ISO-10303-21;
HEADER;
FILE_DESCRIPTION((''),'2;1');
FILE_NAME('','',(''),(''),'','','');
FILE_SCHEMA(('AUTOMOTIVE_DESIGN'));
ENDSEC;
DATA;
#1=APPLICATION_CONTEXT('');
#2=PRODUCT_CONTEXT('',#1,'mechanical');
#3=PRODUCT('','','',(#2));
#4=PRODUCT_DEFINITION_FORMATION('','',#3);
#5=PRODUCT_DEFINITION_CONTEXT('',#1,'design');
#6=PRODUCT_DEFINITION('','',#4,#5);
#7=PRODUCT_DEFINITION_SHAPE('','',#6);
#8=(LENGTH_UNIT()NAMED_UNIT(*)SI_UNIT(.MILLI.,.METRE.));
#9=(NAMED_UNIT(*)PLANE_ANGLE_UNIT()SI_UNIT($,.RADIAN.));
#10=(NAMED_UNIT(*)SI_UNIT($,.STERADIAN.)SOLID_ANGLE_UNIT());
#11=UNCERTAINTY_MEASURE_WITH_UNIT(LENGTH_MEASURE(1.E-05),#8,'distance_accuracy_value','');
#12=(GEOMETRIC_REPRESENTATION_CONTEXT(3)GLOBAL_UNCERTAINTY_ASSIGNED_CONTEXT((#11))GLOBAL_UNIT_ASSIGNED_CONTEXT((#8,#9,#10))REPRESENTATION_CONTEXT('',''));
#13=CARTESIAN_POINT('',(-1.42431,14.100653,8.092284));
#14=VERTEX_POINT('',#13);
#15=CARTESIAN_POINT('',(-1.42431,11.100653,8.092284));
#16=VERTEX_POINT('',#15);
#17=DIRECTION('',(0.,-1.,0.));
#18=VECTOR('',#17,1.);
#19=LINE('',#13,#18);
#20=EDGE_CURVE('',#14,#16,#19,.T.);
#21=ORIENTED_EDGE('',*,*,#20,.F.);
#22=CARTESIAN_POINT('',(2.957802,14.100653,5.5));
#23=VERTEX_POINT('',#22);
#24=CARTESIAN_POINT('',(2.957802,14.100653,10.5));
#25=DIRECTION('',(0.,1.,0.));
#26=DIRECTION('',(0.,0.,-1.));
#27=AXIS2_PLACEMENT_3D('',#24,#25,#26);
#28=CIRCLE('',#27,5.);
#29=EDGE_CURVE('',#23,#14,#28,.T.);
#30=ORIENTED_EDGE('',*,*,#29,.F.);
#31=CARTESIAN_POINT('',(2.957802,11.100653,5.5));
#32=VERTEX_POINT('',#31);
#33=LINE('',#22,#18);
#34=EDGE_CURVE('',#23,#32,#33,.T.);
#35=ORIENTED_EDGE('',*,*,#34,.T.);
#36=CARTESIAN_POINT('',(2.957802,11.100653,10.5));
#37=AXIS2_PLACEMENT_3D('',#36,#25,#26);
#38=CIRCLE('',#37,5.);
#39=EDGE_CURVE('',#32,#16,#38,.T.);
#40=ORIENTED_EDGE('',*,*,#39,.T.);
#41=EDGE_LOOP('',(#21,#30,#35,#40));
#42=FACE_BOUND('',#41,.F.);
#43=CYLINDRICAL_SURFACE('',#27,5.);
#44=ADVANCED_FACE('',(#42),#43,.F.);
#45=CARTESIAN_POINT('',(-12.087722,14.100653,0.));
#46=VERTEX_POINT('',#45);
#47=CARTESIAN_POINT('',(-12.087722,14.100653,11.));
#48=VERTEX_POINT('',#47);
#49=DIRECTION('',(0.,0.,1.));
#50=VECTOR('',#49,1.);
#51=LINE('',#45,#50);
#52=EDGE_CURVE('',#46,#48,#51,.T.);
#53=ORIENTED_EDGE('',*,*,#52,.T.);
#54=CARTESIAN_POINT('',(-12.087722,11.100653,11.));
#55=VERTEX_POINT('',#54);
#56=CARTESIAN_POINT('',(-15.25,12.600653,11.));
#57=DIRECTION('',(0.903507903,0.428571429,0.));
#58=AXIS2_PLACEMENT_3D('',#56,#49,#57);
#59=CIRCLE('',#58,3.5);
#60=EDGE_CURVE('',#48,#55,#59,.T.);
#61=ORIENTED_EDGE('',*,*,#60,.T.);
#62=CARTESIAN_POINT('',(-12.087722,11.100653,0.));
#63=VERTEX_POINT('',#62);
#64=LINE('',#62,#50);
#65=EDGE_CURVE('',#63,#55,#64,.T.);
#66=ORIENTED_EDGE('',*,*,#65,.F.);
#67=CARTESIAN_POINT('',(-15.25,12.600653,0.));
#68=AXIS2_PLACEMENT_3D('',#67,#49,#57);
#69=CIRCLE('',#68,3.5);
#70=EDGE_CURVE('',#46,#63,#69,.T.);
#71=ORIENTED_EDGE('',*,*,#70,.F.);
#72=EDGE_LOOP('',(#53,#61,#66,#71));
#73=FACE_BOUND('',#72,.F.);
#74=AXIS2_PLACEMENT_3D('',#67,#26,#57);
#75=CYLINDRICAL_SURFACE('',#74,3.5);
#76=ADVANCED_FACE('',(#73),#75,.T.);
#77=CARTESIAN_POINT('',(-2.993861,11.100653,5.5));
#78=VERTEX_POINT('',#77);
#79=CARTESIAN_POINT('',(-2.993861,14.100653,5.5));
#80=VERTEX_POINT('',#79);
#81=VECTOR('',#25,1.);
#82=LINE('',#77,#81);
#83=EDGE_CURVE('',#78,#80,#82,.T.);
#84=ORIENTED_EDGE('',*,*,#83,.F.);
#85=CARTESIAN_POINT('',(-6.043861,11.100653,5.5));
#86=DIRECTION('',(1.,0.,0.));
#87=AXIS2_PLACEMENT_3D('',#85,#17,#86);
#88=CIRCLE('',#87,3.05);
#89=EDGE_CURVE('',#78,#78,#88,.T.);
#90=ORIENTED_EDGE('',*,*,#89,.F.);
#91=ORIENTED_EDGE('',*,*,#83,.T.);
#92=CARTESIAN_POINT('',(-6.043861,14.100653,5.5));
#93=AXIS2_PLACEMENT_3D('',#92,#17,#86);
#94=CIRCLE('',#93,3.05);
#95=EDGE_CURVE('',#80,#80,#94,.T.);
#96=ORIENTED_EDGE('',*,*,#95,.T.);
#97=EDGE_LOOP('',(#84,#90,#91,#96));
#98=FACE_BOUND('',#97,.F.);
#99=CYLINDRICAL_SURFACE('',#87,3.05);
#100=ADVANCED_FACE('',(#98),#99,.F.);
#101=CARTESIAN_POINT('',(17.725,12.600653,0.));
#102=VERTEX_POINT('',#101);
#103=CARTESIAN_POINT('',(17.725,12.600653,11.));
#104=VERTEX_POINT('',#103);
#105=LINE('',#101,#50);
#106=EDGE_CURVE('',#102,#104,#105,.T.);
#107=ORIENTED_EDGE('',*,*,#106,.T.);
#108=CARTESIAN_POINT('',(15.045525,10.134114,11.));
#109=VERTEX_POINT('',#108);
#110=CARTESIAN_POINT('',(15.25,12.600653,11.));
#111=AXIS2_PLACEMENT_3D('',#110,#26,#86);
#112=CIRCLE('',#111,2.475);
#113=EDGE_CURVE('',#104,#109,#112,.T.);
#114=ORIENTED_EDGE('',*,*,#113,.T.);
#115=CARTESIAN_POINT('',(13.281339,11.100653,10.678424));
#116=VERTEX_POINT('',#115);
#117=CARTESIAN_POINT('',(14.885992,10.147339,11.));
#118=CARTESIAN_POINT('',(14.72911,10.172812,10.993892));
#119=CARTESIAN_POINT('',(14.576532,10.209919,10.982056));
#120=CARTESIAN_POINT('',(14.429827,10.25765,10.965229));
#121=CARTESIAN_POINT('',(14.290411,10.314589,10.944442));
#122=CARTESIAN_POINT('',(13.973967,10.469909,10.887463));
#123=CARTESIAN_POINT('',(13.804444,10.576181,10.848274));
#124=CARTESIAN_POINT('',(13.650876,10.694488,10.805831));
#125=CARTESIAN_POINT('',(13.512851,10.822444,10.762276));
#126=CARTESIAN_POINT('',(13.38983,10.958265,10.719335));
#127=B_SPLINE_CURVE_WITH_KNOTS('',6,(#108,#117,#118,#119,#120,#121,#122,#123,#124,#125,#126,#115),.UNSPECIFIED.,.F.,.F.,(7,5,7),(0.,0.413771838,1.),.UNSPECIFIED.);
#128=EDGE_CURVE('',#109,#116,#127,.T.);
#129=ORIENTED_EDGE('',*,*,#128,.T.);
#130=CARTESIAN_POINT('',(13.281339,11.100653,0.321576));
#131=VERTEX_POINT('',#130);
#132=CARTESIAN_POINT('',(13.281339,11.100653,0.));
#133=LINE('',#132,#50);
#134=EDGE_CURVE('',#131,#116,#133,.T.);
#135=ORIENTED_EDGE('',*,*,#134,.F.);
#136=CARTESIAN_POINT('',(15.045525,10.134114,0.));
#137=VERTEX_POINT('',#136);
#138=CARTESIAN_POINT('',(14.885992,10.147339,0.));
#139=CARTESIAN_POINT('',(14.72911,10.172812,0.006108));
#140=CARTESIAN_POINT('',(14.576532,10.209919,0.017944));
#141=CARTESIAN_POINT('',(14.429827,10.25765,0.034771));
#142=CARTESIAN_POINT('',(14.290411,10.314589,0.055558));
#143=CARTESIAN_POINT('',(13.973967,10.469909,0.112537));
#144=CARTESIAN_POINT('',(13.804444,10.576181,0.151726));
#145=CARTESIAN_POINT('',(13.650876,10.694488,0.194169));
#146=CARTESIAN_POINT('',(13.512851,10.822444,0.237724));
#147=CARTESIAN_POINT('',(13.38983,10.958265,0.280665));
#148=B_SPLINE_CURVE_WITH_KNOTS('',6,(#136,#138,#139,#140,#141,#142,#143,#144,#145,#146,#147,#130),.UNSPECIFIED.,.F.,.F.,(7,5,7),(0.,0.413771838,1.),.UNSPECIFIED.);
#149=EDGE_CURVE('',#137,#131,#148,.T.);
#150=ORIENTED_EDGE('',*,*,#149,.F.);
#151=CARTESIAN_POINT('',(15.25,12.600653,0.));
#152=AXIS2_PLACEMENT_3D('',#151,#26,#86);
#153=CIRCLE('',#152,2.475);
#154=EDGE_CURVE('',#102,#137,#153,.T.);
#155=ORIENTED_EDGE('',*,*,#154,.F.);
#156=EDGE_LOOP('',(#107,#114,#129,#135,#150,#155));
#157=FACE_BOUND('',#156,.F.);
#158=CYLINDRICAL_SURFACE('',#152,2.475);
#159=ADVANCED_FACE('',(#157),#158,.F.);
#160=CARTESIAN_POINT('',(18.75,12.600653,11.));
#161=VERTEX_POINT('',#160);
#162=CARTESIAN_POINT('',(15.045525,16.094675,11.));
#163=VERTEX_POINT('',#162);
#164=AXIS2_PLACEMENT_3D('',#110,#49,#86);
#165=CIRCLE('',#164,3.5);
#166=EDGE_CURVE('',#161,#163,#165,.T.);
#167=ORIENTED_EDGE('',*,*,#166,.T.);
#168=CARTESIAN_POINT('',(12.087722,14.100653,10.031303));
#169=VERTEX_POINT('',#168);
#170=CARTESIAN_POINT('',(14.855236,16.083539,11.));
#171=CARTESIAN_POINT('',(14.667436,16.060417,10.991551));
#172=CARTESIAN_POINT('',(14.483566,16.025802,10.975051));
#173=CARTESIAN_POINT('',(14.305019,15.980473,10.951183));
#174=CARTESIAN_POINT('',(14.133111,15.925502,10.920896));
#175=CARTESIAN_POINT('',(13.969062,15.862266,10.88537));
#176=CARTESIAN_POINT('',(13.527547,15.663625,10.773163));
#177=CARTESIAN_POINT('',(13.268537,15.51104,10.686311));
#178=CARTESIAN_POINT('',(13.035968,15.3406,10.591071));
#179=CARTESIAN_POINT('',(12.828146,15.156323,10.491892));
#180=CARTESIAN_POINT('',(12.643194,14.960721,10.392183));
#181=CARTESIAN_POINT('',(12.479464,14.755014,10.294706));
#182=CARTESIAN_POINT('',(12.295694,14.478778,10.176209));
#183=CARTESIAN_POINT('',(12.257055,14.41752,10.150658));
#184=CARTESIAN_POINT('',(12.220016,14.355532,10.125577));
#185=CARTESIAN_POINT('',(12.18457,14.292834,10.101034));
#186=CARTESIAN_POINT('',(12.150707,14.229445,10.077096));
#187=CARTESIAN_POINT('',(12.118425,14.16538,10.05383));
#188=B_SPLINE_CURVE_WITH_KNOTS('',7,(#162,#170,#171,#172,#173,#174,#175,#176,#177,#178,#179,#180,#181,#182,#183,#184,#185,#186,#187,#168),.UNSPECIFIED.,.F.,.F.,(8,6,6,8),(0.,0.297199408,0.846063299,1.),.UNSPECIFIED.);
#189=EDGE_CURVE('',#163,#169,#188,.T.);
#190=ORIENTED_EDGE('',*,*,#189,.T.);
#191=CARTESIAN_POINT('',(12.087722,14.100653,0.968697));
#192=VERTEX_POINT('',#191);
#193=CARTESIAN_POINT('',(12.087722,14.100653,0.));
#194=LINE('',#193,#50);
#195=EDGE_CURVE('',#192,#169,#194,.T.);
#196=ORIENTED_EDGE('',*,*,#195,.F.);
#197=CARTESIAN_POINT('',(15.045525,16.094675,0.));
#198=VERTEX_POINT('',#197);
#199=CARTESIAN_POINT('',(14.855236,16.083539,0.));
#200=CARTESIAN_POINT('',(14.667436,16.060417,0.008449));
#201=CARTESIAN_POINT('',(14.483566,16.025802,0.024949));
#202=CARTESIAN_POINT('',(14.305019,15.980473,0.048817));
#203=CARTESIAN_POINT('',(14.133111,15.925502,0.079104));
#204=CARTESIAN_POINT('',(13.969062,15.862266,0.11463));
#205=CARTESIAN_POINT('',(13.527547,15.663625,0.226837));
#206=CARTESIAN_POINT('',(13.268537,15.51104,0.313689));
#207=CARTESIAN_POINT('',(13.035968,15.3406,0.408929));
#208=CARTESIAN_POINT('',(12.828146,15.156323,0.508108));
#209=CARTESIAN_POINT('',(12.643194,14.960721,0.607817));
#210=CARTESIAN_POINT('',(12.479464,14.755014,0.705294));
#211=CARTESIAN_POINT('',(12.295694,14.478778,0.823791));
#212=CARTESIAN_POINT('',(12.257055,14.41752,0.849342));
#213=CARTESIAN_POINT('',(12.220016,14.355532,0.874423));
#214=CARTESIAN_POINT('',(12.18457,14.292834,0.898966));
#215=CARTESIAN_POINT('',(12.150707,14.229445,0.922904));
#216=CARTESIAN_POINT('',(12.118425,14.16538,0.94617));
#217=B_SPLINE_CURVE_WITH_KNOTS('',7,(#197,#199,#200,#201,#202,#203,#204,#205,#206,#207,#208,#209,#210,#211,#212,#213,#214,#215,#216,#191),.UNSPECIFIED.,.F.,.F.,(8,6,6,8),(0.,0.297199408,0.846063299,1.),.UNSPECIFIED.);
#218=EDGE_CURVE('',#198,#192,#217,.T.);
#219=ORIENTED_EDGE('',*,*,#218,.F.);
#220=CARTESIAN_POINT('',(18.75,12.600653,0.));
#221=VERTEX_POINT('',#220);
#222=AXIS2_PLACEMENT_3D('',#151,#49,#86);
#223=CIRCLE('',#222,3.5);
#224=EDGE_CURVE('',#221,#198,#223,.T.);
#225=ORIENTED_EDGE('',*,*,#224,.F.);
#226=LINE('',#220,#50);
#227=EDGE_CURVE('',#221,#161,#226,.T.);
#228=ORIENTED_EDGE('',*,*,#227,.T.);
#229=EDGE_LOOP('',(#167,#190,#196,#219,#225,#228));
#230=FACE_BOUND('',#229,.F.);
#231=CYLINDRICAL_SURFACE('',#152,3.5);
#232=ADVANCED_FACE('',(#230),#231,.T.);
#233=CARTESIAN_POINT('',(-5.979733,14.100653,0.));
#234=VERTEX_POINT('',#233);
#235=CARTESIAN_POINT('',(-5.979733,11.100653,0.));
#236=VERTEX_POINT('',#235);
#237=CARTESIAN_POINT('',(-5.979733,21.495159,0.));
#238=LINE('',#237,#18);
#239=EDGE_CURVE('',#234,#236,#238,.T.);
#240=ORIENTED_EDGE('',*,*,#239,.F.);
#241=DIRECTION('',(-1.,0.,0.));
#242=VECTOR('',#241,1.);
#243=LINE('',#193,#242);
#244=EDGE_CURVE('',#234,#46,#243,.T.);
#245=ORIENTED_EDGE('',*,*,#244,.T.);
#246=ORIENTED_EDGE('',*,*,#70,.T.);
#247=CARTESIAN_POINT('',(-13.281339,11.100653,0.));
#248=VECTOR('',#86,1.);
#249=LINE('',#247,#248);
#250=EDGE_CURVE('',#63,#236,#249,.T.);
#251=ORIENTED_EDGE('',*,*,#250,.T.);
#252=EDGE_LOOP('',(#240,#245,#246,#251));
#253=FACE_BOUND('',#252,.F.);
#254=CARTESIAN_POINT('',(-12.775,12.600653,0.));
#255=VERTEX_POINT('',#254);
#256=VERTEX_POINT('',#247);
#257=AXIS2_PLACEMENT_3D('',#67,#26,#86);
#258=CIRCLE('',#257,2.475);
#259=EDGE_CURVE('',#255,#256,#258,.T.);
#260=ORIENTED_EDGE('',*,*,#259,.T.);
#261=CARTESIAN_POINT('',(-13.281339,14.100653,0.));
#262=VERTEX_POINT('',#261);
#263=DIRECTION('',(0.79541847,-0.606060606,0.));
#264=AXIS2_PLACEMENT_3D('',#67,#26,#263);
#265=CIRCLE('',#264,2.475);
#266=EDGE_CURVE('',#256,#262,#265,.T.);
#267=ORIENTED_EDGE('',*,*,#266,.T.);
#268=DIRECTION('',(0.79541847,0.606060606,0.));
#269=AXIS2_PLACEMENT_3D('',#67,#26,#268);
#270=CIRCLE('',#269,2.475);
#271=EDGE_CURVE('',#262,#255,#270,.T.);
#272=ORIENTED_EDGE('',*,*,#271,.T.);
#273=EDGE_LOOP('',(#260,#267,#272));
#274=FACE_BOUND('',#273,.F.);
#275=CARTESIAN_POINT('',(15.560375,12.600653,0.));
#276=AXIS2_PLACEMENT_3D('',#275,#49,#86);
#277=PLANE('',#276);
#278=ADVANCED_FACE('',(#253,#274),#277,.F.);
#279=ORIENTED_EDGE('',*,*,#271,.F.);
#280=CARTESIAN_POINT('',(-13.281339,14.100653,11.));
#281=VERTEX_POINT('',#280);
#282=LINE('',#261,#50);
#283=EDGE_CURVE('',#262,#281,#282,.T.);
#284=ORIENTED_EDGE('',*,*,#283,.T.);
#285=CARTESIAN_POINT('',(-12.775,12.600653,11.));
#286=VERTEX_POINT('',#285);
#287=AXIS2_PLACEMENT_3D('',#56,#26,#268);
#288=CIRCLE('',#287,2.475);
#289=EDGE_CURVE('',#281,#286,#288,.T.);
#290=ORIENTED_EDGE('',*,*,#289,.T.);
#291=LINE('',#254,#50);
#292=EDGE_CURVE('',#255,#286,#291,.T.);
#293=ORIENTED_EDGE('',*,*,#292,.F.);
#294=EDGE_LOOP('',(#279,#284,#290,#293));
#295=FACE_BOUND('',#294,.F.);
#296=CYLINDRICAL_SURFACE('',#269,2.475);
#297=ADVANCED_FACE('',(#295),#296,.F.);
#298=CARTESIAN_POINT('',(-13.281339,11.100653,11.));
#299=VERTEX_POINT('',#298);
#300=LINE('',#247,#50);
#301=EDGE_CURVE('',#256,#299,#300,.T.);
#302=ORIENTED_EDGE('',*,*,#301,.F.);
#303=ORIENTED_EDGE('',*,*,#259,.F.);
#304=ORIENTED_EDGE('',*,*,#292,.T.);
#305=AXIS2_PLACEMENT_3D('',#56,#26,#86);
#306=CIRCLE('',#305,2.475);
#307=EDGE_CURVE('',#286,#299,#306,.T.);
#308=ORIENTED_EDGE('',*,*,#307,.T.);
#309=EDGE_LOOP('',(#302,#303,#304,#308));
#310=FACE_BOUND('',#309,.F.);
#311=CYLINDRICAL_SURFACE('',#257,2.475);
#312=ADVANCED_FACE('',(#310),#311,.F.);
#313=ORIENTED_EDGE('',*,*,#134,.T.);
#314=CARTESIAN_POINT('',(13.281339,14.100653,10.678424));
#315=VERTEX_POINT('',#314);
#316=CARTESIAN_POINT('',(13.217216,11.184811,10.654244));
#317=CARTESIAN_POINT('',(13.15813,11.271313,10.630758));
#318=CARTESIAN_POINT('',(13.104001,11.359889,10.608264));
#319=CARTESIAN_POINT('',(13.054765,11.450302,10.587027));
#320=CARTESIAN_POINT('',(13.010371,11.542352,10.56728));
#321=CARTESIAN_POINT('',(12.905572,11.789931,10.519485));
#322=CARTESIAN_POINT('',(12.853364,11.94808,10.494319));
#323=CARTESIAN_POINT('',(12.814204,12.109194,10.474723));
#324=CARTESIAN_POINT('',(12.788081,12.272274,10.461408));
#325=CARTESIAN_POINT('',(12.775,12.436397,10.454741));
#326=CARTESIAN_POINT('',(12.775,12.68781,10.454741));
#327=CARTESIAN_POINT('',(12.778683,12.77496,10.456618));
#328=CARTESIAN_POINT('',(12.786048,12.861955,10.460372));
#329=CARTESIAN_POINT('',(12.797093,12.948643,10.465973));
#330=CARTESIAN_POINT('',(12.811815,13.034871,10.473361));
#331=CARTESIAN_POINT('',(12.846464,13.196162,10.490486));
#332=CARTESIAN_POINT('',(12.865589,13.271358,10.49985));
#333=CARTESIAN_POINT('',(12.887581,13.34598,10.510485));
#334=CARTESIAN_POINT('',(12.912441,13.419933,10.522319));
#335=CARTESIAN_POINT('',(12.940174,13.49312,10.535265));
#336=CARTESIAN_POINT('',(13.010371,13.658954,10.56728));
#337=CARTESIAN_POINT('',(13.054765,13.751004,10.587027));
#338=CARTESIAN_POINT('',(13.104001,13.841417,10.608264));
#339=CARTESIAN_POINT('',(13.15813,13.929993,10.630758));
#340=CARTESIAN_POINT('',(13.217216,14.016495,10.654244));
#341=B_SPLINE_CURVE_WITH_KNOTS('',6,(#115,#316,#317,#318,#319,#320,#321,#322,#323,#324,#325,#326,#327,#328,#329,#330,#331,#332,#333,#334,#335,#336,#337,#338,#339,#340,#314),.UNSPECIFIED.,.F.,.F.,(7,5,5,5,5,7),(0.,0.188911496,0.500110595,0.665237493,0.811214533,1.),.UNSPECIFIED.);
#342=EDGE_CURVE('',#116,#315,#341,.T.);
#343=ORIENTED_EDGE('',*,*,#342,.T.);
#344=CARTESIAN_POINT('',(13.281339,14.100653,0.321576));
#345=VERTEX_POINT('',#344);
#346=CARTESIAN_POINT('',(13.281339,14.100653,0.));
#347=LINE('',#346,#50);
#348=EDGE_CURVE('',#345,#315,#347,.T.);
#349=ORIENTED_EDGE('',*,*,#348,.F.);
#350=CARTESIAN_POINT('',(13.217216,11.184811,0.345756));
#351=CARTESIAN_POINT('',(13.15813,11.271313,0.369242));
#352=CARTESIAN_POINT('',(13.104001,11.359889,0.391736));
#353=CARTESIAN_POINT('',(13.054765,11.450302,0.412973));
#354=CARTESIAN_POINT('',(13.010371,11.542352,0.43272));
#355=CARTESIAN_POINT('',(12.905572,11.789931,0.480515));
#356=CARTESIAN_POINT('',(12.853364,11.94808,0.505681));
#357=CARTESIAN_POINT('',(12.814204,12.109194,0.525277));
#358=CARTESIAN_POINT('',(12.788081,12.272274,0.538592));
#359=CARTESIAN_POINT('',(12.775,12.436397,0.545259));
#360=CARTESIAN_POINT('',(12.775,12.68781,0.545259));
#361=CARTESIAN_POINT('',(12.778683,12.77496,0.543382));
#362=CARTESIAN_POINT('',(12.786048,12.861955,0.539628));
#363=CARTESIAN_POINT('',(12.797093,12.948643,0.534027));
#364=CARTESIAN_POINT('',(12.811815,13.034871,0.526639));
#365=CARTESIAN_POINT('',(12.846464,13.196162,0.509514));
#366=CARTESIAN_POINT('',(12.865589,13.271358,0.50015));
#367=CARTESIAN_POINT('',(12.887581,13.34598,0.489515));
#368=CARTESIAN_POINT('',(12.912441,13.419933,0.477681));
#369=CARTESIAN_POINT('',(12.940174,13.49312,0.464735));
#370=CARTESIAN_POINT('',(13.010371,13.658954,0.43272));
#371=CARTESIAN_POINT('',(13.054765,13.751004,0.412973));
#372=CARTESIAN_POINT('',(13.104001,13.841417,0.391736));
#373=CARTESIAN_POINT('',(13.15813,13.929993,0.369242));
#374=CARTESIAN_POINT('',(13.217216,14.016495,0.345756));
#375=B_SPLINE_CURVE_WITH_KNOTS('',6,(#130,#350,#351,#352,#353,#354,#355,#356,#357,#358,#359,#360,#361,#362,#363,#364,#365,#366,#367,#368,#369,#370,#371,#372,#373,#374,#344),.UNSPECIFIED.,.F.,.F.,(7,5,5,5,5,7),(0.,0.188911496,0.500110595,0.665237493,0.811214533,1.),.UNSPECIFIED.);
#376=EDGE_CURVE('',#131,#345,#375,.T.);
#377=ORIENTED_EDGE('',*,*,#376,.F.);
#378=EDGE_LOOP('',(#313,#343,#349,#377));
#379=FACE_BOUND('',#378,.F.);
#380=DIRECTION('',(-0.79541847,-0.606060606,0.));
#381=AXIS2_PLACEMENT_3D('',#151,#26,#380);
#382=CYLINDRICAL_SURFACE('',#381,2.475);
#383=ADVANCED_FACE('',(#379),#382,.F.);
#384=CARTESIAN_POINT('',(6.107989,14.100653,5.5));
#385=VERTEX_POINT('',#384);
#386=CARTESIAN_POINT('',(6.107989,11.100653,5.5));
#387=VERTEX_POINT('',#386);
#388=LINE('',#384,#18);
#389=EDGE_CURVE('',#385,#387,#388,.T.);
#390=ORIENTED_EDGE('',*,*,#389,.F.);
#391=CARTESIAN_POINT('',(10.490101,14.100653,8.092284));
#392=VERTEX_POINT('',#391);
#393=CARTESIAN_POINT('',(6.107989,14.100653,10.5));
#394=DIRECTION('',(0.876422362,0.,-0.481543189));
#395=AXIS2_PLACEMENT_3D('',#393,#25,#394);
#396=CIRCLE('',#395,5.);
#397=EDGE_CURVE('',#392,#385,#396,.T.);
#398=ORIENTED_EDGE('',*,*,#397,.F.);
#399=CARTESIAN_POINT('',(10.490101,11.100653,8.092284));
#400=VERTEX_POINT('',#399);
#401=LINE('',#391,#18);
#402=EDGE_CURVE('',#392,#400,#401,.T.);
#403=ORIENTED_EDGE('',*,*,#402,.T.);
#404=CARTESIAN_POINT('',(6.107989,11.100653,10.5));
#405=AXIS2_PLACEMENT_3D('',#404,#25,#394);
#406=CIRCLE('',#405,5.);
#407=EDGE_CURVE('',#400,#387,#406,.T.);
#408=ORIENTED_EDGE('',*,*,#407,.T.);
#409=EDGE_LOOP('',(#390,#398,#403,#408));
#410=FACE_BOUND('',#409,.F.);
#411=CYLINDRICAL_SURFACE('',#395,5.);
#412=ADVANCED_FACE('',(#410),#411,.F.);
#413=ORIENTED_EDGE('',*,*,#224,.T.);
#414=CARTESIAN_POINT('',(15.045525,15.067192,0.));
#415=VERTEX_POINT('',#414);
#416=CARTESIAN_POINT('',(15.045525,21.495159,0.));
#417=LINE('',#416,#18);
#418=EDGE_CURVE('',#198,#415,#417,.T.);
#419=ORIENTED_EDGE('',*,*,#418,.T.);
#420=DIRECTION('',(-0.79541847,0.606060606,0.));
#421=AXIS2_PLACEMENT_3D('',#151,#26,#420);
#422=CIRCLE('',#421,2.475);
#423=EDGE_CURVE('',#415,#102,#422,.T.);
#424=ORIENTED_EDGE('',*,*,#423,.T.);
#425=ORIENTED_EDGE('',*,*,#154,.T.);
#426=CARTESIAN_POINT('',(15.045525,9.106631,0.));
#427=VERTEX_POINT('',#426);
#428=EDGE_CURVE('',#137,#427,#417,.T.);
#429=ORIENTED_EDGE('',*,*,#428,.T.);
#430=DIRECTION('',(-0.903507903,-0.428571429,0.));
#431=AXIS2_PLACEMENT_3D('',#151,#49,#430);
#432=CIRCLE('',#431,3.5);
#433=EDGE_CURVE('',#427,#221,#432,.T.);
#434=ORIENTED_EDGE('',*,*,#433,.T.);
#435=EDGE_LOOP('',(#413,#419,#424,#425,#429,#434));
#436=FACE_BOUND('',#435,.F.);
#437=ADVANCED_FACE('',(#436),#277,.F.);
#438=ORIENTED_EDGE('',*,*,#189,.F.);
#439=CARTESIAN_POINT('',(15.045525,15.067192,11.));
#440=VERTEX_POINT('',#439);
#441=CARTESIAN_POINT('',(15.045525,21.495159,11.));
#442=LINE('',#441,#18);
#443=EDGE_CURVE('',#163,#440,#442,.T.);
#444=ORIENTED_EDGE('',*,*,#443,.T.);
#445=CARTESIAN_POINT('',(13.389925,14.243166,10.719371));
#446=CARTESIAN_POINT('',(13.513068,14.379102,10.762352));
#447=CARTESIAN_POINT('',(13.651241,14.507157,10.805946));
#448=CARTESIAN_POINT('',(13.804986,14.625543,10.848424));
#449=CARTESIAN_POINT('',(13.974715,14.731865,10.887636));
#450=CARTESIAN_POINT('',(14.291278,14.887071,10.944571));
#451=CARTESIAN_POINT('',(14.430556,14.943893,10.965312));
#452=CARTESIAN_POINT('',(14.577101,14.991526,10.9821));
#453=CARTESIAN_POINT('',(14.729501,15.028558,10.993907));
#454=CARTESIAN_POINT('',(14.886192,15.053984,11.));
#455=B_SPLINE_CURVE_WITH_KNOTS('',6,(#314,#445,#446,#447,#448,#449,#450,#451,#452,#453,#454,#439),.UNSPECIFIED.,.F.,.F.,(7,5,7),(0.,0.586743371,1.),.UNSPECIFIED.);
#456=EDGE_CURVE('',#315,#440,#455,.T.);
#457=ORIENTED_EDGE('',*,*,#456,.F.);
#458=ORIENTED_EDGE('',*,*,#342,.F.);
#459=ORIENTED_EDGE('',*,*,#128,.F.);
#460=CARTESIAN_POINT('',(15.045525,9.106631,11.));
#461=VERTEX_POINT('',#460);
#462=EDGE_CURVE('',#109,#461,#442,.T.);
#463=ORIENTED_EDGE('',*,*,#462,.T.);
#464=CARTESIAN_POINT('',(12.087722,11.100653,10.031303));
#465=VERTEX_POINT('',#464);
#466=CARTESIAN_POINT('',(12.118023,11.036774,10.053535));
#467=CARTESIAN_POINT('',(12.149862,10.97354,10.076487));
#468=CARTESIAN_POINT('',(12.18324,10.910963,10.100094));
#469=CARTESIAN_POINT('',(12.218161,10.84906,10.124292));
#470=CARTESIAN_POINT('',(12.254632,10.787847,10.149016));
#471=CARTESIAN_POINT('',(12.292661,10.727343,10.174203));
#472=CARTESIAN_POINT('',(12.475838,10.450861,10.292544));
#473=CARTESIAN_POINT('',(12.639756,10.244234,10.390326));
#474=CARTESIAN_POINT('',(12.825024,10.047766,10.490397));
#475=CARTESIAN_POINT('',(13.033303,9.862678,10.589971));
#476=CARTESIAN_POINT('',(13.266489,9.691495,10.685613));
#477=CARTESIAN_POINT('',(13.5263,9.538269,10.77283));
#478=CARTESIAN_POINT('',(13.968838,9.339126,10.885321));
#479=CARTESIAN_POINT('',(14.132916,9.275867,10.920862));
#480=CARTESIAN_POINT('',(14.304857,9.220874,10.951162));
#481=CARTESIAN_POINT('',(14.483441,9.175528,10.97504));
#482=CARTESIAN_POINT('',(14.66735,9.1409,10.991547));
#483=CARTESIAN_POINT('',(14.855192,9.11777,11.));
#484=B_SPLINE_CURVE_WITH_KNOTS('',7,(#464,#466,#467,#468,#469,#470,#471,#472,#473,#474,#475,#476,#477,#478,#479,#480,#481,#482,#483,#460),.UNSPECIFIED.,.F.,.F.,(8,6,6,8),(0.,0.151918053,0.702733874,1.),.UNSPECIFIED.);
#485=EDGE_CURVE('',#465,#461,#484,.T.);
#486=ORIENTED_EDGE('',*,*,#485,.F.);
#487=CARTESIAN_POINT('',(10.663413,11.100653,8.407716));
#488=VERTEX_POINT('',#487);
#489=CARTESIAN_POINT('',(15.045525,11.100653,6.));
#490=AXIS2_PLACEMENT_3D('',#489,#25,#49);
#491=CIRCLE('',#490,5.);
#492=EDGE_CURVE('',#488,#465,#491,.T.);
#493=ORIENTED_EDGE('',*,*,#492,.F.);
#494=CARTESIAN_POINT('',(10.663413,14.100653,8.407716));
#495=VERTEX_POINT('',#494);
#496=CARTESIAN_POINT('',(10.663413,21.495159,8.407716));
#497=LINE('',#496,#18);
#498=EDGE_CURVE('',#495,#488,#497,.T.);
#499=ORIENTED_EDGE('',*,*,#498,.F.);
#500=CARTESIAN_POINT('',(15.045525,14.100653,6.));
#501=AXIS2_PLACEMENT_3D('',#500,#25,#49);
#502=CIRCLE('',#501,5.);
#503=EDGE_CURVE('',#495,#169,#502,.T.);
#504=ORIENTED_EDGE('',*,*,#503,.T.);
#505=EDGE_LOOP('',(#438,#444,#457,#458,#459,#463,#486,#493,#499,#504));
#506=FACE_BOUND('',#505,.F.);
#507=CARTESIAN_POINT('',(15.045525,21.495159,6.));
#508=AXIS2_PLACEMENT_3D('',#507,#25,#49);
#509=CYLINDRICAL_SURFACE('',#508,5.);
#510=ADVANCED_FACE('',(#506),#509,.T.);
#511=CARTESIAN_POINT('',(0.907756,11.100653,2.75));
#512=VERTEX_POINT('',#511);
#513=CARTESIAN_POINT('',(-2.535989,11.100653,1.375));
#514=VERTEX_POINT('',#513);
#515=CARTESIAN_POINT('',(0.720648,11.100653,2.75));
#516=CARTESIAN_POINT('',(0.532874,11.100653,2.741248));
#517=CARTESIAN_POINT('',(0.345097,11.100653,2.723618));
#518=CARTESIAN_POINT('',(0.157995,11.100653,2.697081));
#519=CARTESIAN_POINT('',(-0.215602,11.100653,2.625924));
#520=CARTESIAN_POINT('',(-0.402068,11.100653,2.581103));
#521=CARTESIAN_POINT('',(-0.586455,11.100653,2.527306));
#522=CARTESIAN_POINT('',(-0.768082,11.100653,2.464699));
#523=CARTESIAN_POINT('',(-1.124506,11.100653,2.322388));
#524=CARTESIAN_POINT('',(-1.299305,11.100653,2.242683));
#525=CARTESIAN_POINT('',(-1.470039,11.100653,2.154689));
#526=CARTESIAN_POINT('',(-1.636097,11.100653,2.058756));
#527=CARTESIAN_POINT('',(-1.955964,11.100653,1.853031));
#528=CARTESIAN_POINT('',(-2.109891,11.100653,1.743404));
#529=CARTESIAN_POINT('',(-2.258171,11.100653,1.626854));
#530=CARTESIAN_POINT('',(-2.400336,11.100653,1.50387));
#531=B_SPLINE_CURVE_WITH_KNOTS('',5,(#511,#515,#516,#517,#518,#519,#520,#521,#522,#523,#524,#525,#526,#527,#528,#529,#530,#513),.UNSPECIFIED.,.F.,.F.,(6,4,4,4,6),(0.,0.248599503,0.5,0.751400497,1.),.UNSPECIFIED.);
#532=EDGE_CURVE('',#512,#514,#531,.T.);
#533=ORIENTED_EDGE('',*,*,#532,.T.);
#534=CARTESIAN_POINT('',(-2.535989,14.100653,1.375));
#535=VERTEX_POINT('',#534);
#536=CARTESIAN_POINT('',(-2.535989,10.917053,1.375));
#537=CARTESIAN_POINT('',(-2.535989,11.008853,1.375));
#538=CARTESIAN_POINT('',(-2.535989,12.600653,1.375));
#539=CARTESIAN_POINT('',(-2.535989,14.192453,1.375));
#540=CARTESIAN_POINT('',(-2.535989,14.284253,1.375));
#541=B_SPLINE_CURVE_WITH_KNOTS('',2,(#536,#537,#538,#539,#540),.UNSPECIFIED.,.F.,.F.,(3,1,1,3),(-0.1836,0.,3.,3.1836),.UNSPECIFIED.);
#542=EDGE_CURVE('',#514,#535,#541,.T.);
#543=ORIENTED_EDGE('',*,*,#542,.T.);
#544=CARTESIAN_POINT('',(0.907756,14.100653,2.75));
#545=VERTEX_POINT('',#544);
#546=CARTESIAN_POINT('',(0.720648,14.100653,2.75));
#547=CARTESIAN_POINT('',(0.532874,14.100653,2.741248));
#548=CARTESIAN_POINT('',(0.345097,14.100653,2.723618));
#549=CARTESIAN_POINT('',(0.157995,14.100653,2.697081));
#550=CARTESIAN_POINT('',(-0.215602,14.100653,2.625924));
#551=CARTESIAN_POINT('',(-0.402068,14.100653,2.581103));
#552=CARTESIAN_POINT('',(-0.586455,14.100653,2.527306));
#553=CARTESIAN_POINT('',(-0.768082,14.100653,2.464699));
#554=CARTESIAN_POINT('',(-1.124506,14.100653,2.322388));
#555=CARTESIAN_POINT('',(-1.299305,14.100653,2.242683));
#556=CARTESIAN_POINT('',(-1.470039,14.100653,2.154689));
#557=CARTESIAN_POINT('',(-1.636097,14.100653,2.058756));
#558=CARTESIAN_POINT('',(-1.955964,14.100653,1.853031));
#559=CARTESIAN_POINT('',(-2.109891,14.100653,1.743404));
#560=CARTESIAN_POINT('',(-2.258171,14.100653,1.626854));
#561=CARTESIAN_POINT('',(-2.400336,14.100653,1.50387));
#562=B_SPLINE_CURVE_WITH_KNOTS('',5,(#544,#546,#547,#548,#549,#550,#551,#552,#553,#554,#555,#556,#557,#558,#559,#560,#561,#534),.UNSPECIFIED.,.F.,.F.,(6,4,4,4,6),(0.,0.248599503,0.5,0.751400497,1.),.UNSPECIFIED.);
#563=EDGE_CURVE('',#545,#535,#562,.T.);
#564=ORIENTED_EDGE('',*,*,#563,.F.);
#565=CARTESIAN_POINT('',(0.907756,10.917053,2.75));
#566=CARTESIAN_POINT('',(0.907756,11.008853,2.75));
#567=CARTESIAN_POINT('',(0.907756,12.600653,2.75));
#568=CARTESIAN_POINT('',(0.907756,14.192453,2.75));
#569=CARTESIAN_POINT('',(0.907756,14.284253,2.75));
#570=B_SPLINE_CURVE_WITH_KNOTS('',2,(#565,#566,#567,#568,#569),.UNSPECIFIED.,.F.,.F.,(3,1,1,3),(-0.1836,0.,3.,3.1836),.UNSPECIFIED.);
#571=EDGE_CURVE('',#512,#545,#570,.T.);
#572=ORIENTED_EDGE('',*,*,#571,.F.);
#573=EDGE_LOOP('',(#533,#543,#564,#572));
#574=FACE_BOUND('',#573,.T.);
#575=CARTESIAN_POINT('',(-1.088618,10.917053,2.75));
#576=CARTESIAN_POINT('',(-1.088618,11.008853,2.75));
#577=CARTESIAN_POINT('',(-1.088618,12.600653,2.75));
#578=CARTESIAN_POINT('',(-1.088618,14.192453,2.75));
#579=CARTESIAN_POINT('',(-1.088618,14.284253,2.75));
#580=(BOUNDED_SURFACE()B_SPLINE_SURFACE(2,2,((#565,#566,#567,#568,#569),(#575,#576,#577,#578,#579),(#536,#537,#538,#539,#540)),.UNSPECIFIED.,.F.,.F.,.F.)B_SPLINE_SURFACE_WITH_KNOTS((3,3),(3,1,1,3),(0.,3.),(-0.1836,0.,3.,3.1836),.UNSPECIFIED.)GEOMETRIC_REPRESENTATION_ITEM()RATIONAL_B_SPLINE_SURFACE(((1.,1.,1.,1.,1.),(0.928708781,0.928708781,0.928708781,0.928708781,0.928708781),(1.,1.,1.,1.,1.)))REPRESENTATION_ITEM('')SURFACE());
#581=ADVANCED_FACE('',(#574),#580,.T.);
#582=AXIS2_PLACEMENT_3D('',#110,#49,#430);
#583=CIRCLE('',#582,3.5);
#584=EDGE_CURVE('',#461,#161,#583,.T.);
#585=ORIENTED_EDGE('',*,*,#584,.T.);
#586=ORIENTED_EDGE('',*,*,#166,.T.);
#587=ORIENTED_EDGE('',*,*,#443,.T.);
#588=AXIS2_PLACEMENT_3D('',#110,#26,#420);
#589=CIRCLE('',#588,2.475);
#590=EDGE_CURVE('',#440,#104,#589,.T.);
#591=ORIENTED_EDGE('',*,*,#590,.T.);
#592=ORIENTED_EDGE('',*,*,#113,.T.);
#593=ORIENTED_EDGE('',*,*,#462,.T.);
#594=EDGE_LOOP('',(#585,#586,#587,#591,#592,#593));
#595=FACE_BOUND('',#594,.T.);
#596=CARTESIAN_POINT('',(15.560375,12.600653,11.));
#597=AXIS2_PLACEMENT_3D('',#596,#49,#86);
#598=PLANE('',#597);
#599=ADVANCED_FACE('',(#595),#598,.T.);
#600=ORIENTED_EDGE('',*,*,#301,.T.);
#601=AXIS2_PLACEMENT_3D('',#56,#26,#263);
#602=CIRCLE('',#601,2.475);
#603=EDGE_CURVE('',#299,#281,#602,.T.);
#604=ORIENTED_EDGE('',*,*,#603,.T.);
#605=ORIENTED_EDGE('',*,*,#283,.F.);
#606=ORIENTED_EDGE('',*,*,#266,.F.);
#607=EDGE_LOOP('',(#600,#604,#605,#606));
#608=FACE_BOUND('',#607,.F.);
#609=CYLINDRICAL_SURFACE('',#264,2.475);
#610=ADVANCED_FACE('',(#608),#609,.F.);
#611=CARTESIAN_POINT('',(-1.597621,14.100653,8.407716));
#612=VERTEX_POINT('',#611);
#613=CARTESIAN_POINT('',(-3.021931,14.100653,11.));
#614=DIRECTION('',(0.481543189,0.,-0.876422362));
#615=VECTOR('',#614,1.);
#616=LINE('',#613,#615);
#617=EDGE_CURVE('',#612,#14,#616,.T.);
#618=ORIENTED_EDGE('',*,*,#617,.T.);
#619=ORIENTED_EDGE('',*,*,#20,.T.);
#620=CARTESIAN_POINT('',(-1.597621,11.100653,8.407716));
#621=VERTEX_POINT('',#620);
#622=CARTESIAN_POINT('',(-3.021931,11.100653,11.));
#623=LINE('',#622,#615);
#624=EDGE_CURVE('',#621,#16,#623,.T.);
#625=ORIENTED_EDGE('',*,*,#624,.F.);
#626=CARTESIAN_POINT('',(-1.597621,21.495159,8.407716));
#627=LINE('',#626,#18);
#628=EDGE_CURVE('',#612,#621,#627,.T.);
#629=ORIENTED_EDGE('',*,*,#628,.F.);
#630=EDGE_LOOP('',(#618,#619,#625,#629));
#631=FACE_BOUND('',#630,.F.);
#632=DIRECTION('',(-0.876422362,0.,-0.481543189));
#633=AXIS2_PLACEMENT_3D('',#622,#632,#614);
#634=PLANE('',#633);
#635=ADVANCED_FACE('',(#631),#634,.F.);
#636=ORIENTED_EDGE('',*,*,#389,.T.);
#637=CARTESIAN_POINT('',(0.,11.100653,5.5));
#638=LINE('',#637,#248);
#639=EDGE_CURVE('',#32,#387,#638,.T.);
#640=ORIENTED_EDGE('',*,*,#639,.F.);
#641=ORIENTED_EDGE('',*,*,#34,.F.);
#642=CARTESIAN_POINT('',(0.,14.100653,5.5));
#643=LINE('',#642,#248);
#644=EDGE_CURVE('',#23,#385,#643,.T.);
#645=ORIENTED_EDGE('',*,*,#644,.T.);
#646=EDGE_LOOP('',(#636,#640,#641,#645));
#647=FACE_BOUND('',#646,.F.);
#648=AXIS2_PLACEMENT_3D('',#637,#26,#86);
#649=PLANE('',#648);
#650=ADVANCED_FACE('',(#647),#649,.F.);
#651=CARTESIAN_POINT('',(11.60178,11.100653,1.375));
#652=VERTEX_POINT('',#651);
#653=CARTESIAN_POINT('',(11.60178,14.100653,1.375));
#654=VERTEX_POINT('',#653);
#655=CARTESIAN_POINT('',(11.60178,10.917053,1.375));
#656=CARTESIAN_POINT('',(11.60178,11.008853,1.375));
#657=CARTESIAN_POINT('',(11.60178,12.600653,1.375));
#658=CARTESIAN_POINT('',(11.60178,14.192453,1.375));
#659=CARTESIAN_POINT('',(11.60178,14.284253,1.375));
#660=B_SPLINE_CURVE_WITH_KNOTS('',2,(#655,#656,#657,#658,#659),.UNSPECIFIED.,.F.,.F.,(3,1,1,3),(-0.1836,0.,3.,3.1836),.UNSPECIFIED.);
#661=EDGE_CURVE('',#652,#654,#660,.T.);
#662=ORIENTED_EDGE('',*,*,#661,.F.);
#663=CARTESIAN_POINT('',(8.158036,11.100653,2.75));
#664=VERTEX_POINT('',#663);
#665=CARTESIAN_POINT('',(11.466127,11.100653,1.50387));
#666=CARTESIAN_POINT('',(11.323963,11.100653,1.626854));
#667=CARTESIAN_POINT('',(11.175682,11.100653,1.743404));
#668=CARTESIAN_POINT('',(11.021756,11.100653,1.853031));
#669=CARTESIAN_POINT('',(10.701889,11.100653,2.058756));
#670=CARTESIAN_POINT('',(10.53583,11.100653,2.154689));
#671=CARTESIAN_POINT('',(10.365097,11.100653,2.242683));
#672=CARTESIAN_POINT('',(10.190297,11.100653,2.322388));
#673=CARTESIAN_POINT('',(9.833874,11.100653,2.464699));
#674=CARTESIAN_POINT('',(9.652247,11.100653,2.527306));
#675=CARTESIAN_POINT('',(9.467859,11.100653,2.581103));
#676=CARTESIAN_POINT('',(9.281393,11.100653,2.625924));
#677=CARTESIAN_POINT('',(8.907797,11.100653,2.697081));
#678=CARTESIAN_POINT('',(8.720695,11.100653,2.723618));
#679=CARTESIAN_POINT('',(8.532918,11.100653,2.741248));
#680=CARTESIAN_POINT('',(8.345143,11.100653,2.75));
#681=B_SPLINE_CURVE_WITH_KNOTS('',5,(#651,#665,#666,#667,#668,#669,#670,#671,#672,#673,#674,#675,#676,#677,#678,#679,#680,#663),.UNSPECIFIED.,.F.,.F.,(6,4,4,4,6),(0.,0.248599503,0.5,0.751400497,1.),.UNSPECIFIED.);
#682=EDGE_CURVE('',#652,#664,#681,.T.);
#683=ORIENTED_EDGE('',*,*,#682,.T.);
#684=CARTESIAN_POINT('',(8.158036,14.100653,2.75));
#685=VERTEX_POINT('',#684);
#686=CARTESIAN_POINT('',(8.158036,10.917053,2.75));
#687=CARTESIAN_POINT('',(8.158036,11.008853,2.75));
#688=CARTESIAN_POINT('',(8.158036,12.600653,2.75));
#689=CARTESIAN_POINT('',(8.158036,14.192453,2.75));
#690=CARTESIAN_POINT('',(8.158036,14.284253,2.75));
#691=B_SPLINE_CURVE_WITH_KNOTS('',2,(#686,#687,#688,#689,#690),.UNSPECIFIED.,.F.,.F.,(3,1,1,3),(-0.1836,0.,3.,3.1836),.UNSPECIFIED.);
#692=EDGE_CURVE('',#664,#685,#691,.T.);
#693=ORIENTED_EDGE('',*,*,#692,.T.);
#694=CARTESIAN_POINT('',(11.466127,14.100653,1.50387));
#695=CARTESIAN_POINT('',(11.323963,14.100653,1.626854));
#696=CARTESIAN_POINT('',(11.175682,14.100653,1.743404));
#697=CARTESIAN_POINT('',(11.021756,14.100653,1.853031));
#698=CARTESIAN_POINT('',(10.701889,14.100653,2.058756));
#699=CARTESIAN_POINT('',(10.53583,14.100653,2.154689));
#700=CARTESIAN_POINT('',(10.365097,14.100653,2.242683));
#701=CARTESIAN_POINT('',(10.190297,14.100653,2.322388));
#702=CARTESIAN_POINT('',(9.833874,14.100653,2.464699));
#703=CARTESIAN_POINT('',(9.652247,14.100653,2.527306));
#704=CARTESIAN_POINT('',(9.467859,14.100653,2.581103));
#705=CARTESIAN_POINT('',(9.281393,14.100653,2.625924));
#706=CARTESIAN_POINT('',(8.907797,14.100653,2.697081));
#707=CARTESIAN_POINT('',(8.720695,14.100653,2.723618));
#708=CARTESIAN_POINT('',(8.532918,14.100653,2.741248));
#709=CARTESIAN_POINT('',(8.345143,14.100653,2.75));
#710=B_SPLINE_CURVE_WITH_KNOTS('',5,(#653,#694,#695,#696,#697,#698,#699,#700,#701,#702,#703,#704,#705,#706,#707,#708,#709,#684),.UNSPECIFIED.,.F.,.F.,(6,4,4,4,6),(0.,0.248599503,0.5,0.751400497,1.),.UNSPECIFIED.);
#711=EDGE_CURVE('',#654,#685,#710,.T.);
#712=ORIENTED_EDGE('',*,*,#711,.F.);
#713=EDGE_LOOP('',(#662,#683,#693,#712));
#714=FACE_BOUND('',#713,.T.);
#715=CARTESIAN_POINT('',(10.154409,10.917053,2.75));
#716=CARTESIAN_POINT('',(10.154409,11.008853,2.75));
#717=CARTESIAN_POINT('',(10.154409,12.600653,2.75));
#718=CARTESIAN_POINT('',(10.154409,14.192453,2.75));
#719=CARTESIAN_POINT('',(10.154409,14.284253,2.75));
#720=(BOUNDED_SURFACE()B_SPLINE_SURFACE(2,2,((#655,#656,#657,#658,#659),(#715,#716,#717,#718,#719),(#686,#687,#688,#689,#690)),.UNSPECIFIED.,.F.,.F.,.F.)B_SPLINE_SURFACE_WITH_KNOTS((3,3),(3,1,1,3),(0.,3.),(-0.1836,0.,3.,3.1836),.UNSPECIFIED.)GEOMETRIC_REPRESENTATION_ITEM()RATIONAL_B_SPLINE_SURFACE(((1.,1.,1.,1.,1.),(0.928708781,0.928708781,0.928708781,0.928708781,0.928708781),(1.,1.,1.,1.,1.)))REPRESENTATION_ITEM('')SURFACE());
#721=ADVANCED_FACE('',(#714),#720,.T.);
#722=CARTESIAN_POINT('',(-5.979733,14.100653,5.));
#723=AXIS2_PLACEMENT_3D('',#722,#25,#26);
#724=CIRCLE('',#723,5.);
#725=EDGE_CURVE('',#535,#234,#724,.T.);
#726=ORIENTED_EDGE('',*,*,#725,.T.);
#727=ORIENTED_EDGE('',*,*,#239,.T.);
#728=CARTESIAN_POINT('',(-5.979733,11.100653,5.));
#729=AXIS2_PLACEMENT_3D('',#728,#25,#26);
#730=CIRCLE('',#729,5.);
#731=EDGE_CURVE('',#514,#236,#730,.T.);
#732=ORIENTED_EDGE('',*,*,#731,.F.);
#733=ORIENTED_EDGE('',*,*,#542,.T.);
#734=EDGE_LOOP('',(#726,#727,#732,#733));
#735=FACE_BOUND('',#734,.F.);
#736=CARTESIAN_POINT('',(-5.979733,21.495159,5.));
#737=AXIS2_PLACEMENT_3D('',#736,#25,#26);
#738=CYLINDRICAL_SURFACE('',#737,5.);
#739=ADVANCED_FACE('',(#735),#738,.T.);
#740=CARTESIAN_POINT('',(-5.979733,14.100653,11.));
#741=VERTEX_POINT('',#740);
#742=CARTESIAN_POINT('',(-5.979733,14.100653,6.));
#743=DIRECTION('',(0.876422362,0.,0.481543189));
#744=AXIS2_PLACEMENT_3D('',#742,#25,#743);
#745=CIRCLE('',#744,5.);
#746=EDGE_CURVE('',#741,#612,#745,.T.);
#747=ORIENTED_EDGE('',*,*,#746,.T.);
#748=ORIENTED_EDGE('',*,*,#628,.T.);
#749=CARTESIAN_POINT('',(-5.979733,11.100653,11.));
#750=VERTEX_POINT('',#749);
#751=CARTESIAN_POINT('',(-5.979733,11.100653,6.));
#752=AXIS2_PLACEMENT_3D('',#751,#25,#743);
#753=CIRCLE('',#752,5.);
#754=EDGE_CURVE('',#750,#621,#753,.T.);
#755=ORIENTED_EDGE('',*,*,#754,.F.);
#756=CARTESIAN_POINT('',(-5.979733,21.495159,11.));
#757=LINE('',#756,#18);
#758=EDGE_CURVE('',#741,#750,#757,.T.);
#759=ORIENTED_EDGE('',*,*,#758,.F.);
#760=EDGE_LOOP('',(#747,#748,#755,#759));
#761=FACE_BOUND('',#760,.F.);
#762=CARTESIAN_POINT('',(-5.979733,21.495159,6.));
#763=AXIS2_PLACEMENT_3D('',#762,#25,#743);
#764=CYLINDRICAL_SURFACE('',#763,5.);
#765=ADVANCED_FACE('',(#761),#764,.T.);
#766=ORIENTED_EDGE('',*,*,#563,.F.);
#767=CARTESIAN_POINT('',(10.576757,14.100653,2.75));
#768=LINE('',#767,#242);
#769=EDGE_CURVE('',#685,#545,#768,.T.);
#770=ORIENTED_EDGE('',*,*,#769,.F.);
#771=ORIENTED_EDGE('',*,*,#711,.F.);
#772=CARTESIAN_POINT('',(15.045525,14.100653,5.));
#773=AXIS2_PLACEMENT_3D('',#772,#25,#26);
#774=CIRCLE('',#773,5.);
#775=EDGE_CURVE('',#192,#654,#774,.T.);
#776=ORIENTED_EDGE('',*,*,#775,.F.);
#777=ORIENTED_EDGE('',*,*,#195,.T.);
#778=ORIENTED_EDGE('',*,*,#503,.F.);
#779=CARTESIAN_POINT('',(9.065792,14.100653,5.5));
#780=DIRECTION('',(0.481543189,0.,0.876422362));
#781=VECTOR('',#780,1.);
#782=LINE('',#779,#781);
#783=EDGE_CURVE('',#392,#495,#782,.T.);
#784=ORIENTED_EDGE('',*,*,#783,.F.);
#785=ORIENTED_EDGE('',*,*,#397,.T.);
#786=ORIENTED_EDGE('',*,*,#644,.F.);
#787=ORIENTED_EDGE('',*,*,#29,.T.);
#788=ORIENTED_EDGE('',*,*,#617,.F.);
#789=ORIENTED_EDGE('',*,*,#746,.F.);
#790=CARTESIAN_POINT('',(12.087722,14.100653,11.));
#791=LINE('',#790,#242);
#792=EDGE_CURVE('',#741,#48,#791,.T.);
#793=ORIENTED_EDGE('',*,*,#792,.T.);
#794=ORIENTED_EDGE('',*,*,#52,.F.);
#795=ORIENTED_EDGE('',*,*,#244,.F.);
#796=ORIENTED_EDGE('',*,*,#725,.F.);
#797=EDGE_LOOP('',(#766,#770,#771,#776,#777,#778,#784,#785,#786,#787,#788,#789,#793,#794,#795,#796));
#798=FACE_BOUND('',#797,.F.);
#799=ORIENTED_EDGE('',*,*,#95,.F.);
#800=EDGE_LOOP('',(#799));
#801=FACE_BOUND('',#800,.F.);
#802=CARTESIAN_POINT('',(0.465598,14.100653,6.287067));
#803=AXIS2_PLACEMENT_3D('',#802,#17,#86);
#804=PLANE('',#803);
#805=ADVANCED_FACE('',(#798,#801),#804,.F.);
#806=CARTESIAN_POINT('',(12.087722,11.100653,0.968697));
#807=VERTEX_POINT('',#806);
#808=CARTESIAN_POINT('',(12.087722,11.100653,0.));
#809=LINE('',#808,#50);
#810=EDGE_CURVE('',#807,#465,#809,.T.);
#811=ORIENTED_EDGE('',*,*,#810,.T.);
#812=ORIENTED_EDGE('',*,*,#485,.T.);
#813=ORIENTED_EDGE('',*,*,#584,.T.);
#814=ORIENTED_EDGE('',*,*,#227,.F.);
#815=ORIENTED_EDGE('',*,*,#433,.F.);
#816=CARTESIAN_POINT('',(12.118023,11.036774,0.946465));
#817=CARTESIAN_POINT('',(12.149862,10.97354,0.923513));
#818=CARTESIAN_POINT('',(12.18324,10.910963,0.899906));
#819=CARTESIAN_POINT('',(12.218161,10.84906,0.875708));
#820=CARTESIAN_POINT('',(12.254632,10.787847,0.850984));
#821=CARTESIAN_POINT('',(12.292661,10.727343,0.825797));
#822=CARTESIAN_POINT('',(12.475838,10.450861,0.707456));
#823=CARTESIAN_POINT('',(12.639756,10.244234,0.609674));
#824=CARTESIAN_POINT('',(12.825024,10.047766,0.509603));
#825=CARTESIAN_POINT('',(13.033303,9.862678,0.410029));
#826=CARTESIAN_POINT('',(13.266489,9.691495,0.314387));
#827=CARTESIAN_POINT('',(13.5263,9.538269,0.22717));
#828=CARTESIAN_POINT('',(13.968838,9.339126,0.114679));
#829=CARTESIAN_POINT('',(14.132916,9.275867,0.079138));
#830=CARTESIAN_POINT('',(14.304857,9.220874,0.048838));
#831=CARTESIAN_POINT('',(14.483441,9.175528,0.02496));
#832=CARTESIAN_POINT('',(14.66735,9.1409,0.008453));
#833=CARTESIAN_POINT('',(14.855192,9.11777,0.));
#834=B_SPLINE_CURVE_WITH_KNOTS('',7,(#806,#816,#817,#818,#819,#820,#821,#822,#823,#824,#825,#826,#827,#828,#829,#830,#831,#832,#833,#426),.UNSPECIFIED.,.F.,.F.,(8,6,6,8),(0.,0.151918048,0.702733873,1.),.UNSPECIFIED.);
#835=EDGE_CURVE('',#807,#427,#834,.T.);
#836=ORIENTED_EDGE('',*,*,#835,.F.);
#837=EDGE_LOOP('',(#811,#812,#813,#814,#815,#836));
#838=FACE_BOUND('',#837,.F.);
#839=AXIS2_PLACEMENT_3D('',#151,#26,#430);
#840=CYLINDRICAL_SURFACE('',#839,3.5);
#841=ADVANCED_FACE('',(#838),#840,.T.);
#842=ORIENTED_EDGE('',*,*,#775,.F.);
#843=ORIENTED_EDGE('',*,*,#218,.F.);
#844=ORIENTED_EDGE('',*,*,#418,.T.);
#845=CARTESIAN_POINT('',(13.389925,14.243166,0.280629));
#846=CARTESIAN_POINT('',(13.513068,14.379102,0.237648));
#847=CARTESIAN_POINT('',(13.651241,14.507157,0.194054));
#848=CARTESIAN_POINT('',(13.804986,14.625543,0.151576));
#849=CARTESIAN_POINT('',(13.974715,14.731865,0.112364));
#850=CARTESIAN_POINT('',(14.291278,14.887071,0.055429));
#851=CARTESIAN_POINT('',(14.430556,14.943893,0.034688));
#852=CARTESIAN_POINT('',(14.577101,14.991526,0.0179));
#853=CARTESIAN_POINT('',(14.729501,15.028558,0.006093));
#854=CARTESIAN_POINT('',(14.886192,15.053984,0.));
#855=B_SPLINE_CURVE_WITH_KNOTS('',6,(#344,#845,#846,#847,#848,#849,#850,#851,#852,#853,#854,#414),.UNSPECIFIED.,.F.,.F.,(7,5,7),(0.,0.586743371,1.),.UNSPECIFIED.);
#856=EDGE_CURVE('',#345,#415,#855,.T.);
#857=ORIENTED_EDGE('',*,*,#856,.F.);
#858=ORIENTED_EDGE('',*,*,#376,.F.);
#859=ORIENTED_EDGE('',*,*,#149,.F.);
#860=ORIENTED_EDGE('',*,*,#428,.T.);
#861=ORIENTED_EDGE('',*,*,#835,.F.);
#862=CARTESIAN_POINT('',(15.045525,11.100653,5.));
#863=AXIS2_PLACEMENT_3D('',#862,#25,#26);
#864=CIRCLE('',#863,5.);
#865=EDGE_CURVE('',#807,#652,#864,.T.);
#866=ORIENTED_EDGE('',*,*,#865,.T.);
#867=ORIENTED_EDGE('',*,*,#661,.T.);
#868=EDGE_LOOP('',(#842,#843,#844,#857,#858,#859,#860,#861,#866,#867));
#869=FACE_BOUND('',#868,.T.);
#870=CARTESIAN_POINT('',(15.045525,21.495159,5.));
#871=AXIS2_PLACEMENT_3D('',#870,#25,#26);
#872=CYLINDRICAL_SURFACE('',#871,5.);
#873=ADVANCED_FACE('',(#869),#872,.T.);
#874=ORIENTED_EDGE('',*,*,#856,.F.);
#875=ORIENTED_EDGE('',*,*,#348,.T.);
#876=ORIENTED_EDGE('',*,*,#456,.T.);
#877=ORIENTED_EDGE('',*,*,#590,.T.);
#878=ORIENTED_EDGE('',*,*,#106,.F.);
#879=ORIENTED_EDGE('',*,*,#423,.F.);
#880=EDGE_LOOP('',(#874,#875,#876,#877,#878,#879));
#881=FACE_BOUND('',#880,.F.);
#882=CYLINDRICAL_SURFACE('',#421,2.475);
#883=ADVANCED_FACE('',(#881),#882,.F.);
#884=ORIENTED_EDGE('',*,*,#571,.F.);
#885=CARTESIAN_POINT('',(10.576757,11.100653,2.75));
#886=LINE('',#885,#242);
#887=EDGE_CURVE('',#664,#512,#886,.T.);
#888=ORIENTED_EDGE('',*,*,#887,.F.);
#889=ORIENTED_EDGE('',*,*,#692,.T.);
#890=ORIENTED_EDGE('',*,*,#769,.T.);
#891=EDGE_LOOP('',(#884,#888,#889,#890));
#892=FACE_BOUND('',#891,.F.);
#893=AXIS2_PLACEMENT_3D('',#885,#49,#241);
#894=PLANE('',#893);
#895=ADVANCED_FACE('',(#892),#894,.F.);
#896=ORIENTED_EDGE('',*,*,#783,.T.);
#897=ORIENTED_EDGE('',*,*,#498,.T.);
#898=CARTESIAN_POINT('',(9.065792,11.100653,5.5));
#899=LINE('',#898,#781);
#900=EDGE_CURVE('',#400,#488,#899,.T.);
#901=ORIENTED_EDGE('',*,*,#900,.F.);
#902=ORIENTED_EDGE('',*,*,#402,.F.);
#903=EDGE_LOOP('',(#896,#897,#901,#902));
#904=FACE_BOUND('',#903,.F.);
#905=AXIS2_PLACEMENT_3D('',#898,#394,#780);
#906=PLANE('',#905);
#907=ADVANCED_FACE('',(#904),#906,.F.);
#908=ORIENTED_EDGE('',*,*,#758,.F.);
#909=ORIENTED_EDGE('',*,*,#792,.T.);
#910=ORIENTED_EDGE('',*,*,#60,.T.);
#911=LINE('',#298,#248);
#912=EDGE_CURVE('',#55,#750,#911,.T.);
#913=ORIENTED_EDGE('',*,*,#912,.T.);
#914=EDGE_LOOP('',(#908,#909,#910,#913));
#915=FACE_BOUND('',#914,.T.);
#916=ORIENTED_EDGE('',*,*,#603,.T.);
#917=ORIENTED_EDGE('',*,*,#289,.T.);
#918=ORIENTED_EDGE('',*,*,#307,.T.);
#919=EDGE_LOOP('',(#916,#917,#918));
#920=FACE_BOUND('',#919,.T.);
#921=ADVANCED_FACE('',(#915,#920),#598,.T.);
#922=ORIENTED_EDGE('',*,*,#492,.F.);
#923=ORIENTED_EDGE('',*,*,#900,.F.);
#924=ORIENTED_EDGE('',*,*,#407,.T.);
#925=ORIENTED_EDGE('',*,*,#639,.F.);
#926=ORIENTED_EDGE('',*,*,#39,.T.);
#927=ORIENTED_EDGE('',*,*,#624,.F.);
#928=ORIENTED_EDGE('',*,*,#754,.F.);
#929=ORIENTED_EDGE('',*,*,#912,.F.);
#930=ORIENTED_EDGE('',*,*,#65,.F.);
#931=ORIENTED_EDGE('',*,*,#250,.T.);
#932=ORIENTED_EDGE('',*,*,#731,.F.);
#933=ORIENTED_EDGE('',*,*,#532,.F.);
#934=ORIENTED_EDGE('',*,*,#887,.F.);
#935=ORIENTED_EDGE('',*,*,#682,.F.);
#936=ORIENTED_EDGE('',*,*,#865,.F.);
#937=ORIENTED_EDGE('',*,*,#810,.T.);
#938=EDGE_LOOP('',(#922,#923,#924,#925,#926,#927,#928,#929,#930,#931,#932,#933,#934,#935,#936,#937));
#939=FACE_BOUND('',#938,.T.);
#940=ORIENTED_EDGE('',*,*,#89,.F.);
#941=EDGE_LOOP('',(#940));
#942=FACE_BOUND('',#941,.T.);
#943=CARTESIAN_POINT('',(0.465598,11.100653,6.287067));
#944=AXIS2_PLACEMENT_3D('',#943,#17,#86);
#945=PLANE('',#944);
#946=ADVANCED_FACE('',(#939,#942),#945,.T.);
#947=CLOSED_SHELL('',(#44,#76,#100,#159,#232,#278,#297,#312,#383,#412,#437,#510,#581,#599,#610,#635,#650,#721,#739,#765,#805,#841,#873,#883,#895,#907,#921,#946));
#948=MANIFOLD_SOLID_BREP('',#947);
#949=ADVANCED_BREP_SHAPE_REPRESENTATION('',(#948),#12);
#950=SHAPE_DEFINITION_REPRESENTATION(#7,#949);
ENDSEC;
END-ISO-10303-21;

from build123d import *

# Parameters (mm, degrees)
F1_DEPTH    = 11
F2_R        = 3.05
F3_DEPTH    = 3
F4_T1_DEPTH = 3
F4_T3_DEPTH = 17.7890113567
F5_R        = 5


# Not quite as in the source:
# - a fillet or chamfer that OpenCascade refuses, or shapes differently, is made with other operations: its cross-section is extruded or revolved along the edge and cut away or added


with BuildPart() as f1:
    # F0 (on Top) → F1 (new body)
    with BuildSketch(Plane.XY):
        with BuildLine():
            ThreePointArc((13.2813392877, 14.1006531194), (16.0415774558, 14.9456542135), (17.725, 12.6006531194))
            ThreePointArc((17.725, 12.6006531194), (16.0415774558, 10.2556520253), (13.2813392877, 11.1006531194))
            Line((13.2813392877, 11.1006531194), (12.0877223398, 11.1006531194))
            ThreePointArc((12.0877223398, 11.1006531194), (16.0187744108, 9.1861273975), (18.75, 12.6006531194))
            ThreePointArc((18.75, 12.6006531194), (16.0187744108, 16.0151788413), (12.0877223398, 14.1006531194))
            Line((12.0877223398, 14.1006531194), (13.2813392877, 14.1006531194))
        make_face()
        with BuildLine():
            ThreePointArc((13.2813392877, 11.1006531194), (12.775, 12.6006531194), (13.2813392877, 14.1006531194))
            Line((13.2813392877, 14.1006531194), (12.0877223398, 14.1006531194))
            ThreePointArc((12.0877223398, 14.1006531194), (11.75, 12.6006531194), (12.0877223398, 11.1006531194))
            Line((12.0877223398, 11.1006531194), (13.2813392877, 11.1006531194))
        make_face()
        with BuildLine():
            ThreePointArc((12.0877223398, 11.1006531194), (11.75, 12.6006531194), (12.0877223398, 14.1006531194))
            Line((12.0877223398, 14.1006531194), (-12.0877223398, 14.1006531194))
            ThreePointArc((-12.0877223398, 14.1006531194), (-11.8354742781, 13.3694275302), (-11.75, 12.6006531194))
            ThreePointArc((-11.75, 12.6006531194), (-11.8354742781, 11.8318787086), (-12.0877223398, 11.1006531194))
            Line((-12.0877223398, 11.1006531194), (12.0877223398, 11.1006531194))
        make_face()
        with BuildLine():
            ThreePointArc((-11.75, 12.6006531194), (-11.8354742781, 13.3694275302), (-12.0877223398, 14.1006531194))
            Line((-12.0877223398, 14.1006531194), (-13.2813392877, 14.1006531194))
            ThreePointArc((-13.2813392877, 14.1006531194), (-12.9049989059, 13.3922305752), (-12.775, 12.6006531194))
            ThreePointArc((-12.775, 12.6006531194), (-12.9049989059, 11.8090756636), (-13.2813392877, 11.1006531194))
            Line((-13.2813392877, 11.1006531194), (-12.0877223398, 11.1006531194))
            ThreePointArc((-12.0877223398, 11.1006531194), (-11.8354742781, 11.8318787086), (-11.75, 12.6006531194))
        make_face()
        with BuildLine():
            Line((-13.2813392877, 14.1006531194), (-12.0877223398, 14.1006531194))
            ThreePointArc((-12.0877223398, 14.1006531194), (-18.75, 12.6006531194), (-12.0877223398, 11.1006531194))
            Line((-12.0877223398, 11.1006531194), (-13.2813392877, 11.1006531194))
            ThreePointArc((-13.2813392877, 11.1006531194), (-17.725, 12.6006531194), (-13.2813392877, 14.1006531194))
        make_face()
    extrude(amount=F1_DEPTH)

    # F2 (on face) → F3 (cut, through all)
    with BuildSketch(Plane.XZ.offset(-11.1006531194)):
        with Locations((-6.0438611699, 5.5)):
            Circle(F2_R)
        Polygon((12.0877223398, 11), (-3.021930585, 11), (0, 5.5), (9.0657917549, 5.5), align=None)
        Polygon((10.5767570474, 2.75), (-1.5109652925, 2.75), (-3.021930585, 0), (12.0877223398, 0), align=None)
    extrude(amount=-F3_DEPTH, mode=Mode.SUBTRACT)

    # F4: fillet of radius 5 on 6 edges, made by hand

    # F4_s2 → F4_t1 (join)
    with BuildSketch(Plane.XZ.offset(-14.1006531194)):
        with BuildLine():
            ThreePointArc((2.9578022713, 5.5), (0.4120783796, 6.1965955492), (-1.4243095392, 8.0922840533))
            Line((-1.4243095392, 8.0922840533), (0, 5.5))
            Line((0, 5.5), (2.9578022713, 5.5))
        make_face()
        with BuildLine():
            ThreePointArc((10.4901012941, 8.0922840533), (8.6537133753, 6.1965955492), (6.1079894835, 5.5))
            Line((6.1079894835, 5.5), (9.0657917549, 5.5))
            Line((9.0657917549, 5.5), (10.4901012941, 8.0922840533))
        make_face()
    extrude(amount=F4_T1_DEPTH)

    # F4_s4 → F4_t3 (cut)
    with BuildSketch(Plane.XZ.offset(-21.4951587977)):
        with BuildLine():
            ThreePointArc((-1.5976210458, 8.4077159467), (-3.4340089645, 10.3034044508), (-5.9797328563, 11))
            Line((-5.9797328563, 11), (-3.021930585, 11))
            Line((-3.021930585, 11), (-1.5976210458, 8.4077159467))
        make_face()
        with BuildLine():
            ThreePointArc((-5.9797328563, 0), (-3.4340089645, 0.6965955492), (-1.5976210458, 2.5922840533))
            Line((-1.5976210458, 2.5922840533), (-3.021930585, 0))
            Line((-3.021930585, 0), (-5.9797328563, 0))
        make_face()
        with BuildLine():
            ThreePointArc((15.0455246112, 0), (12.4998007194, 0.6965955492), (10.6634128006, 2.5922840533))
            Line((10.6634128006, 2.5922840533), (12.0877223398, 0))
            Line((12.0877223398, 0), (15.0455246112, 0))
        make_face()
        with BuildLine():
            ThreePointArc((15.0455246112, 11), (12.4998007194, 10.3034044508), (10.6634128006, 8.4077159467))
            Line((10.6634128006, 8.4077159467), (12.0877223398, 11))
            Line((12.0877223398, 11), (15.0455246112, 11))
        make_face()
    extrude(amount=F4_T3_DEPTH, mode=Mode.SUBTRACT)

    # F5
    f5_edges = [f1.edges().sort_by_distance(p)[0] for p in [
        (10.576757, 12.600653, 2.75),
        (-1.510965, 12.600653, 2.75),
    ]]
    fillet(f5_edges, radius=F5_R)


solid = f1.part
